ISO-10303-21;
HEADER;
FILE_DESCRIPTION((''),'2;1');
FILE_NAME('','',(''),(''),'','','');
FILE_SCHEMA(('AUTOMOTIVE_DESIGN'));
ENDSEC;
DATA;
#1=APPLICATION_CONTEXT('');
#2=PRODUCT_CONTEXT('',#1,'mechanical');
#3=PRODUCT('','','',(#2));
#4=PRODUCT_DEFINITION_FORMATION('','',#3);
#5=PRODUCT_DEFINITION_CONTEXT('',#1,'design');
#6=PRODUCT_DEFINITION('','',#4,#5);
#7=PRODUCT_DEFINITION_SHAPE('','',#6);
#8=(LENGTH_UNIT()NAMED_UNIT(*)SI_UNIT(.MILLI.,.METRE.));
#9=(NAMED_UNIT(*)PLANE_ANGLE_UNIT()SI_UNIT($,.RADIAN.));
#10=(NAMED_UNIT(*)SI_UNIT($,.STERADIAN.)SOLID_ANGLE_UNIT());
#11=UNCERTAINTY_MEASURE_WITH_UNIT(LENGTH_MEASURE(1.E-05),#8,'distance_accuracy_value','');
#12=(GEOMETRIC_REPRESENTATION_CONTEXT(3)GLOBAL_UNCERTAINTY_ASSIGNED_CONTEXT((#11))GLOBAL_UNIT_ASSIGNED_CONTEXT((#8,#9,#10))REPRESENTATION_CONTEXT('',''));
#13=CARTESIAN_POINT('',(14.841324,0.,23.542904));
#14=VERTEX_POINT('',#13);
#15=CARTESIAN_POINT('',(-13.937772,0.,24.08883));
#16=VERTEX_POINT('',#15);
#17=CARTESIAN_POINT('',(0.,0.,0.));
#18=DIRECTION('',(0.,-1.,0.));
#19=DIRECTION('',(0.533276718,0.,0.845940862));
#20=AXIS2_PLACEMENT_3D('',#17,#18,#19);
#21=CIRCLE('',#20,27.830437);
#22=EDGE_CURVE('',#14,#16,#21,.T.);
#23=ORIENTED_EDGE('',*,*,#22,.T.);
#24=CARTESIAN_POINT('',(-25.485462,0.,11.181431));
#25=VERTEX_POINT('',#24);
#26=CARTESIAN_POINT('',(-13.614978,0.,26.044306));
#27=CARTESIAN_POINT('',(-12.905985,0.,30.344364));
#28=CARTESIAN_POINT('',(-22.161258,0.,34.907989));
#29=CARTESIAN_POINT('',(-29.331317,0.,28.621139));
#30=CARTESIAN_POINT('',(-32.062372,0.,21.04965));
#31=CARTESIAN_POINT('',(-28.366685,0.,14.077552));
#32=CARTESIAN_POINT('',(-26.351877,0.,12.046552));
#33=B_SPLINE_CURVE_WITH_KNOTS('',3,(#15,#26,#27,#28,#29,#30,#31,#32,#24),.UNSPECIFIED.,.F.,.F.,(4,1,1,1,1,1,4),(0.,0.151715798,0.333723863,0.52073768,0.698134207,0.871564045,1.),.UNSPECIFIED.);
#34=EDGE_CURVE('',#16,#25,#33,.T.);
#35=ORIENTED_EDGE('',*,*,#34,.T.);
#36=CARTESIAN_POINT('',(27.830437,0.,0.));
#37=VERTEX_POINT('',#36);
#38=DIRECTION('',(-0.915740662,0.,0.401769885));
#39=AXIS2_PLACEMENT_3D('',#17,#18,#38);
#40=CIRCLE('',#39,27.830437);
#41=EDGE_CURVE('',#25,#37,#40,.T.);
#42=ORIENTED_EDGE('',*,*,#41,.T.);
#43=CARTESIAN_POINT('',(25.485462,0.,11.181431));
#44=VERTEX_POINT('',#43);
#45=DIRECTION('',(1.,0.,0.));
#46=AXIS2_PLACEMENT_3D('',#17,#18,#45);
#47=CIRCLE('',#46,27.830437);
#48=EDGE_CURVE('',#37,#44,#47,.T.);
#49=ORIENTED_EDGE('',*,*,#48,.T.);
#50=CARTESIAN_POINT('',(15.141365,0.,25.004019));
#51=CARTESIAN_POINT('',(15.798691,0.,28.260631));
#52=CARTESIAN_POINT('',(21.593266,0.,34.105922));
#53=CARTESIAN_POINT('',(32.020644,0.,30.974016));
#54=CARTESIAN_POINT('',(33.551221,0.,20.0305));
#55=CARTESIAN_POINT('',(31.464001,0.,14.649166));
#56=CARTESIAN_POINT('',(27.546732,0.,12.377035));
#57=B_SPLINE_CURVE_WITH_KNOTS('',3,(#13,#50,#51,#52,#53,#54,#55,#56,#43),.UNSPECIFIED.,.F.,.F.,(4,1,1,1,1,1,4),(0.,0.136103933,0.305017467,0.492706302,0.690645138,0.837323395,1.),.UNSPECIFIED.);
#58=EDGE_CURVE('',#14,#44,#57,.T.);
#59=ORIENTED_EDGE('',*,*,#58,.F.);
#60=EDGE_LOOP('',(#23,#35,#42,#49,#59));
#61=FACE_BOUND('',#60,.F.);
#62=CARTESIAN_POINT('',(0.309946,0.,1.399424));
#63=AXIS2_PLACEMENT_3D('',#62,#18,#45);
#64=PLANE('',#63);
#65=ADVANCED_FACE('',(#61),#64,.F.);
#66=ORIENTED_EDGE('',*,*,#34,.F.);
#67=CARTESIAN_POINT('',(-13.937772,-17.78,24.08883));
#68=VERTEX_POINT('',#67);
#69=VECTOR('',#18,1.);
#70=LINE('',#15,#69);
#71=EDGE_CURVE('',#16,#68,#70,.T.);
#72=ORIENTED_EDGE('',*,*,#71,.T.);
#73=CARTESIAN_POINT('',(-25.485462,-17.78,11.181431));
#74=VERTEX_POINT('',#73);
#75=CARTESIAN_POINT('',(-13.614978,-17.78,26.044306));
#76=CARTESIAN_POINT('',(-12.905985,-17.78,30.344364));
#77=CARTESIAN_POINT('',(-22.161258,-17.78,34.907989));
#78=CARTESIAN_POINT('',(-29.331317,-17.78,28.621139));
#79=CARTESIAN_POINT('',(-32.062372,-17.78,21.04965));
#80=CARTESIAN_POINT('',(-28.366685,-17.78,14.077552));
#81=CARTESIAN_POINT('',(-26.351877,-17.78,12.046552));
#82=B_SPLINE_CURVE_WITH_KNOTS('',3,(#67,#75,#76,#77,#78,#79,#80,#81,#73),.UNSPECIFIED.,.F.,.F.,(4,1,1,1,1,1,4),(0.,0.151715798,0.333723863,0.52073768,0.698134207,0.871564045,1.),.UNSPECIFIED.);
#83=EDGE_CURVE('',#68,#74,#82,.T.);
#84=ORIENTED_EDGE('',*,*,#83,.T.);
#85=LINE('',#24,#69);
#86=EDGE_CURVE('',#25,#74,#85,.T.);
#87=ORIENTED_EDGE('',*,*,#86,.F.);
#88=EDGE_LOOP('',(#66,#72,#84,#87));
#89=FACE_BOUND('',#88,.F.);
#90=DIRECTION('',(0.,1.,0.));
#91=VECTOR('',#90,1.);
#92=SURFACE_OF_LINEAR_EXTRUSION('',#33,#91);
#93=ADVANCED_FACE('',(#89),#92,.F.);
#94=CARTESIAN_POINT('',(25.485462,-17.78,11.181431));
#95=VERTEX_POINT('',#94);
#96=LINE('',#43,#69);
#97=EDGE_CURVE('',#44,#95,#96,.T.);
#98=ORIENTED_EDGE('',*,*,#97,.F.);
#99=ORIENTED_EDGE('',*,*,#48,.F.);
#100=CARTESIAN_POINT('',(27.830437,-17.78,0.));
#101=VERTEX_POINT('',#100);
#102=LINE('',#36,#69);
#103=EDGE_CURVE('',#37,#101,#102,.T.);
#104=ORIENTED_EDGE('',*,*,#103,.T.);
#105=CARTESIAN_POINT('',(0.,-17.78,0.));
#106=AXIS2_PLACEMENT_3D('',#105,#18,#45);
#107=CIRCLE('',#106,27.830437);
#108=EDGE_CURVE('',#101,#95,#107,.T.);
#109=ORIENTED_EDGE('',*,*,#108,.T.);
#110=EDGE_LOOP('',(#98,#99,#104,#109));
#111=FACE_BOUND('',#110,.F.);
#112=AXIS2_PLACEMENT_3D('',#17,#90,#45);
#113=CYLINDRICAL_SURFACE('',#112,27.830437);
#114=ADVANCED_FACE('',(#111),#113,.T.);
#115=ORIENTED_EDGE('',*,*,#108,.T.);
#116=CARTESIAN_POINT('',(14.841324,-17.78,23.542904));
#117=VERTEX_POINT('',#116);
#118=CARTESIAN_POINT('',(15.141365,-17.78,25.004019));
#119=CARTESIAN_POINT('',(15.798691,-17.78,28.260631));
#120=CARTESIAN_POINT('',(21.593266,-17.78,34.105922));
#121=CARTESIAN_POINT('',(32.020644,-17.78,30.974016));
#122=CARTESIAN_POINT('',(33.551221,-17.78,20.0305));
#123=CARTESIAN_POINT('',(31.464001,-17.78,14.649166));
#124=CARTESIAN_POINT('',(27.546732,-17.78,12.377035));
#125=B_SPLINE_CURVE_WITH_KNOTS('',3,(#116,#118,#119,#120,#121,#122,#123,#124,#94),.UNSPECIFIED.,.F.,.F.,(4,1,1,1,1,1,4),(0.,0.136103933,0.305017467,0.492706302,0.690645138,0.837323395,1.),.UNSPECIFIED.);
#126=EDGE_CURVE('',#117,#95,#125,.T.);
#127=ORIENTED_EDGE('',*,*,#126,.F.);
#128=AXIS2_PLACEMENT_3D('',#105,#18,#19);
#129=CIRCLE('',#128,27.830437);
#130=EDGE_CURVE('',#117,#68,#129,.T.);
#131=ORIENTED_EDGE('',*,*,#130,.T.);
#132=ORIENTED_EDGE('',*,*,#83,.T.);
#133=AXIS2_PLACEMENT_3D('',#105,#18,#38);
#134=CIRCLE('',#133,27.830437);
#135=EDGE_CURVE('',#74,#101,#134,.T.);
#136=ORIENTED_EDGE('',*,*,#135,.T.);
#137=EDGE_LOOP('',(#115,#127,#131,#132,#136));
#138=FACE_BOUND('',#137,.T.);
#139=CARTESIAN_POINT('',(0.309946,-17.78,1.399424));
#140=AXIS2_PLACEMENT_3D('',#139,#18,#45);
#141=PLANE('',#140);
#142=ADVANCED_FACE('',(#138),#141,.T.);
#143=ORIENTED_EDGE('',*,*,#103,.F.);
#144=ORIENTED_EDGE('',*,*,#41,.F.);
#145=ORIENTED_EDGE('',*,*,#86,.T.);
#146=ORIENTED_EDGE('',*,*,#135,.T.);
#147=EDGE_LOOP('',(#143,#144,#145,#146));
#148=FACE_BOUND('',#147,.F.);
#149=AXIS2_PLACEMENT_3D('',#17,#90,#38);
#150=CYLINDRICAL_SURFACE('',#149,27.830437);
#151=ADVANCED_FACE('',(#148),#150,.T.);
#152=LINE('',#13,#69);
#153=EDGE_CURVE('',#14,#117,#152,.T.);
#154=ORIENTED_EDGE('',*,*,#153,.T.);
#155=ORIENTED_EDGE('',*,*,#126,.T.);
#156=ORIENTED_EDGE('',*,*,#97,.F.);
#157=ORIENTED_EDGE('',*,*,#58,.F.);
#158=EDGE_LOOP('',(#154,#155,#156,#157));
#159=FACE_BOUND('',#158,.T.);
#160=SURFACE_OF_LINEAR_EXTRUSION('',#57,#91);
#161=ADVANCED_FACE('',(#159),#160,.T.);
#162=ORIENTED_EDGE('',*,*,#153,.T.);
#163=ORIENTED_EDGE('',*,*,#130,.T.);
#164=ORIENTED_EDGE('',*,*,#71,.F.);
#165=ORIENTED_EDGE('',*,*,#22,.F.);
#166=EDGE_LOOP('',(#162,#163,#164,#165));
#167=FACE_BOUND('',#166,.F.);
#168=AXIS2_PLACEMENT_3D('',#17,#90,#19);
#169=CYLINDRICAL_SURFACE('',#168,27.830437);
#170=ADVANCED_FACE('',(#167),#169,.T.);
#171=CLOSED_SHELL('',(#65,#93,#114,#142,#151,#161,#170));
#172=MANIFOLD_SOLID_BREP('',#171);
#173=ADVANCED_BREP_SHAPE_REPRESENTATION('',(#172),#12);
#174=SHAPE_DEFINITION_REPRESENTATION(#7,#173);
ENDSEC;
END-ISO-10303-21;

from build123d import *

# Parameters (mm, degrees)
F2_DEPTH = 17.78


# Not quite as in the source:
# - the program builds the solid bodies; features that only make, move or delete a surface that nothing else refers to are left out


with BuildPart() as f2:
    # F0 (on Front) → F2 (new body)
    with BuildSketch(Plane.XZ):
        with BuildLine():
            ThreePointArc((-25.4854624617, 11.1814313142), (-5.7123399341, -27.2378849325), (27.8304366318, 0))
            ThreePointArc((27.8304366318, 0), (27.2378849325, 5.7123399341), (25.4854624617, 11.1814313142))
            ThreePointArc((25.4854624617, 11.1814313142), (21.0894268244, 18.1595506369), (14.8413239123, 23.5429035518))
            ThreePointArc((14.8413239123, 23.5429035518), (0.5278354358, 27.8254306862), (-13.9377721615, 24.088829575))
            ThreePointArc((-13.9377721615, 24.088829575), (-20.7412171654, 18.5562688495), (-25.4854624617, 11.1814313142))
        make_face()
        with BuildLine():
            ThreePointArc((14.8413239123, 23.5429035518), (21.0894268244, 18.1595506369), (25.4854624617, 11.1814313142))
            add(Edge.make_bspline(
                [(14.8413239123, 23.5429035518), (15.1413649797, 25.0040188999), (15.7986912782, 28.260631254), (21.5932657669, 34.1059217282), (32.0206442284, 30.9740164086), (33.5512212932, 20.0305004366), (31.4640007875, 14.6491656343), (27.5467324966, 12.3770350557), (25.4854624617, 11.1814313142)],
                knots=[0, 0, 0, 0, 0.1361039331, 0.3050174671, 0.492706302, 0.690645138, 0.8373233948, 1, 1, 1, 1], degree=3))
        make_face()
        with BuildLine():
            add(Edge.make_bspline(
                [(-13.9377721615, 24.088829575), (-13.6149779351, 26.0443059259), (-12.9059851741, 30.3443635616), (-22.1612583852, 34.9079889108), (-29.3313166227, 28.6211389756), (-32.0623724786, 21.0496503131), (-28.3666845132, 14.0775517686), (-26.3518766449, 12.0465521212), (-25.4854624617, 11.1814313142)],
                knots=[0, 0, 0, 0, 0.1517157978, 0.3337238633, 0.5207376803, 0.6981342072, 0.871564045, 1, 1, 1, 1], degree=3))
            ThreePointArc((-25.4854624617, 11.1814313142), (-20.7412171654, 18.5562688495), (-13.9377721615, 24.088829575))
        make_face()
    extrude(amount=F2_DEPTH)


solid = f2.part
